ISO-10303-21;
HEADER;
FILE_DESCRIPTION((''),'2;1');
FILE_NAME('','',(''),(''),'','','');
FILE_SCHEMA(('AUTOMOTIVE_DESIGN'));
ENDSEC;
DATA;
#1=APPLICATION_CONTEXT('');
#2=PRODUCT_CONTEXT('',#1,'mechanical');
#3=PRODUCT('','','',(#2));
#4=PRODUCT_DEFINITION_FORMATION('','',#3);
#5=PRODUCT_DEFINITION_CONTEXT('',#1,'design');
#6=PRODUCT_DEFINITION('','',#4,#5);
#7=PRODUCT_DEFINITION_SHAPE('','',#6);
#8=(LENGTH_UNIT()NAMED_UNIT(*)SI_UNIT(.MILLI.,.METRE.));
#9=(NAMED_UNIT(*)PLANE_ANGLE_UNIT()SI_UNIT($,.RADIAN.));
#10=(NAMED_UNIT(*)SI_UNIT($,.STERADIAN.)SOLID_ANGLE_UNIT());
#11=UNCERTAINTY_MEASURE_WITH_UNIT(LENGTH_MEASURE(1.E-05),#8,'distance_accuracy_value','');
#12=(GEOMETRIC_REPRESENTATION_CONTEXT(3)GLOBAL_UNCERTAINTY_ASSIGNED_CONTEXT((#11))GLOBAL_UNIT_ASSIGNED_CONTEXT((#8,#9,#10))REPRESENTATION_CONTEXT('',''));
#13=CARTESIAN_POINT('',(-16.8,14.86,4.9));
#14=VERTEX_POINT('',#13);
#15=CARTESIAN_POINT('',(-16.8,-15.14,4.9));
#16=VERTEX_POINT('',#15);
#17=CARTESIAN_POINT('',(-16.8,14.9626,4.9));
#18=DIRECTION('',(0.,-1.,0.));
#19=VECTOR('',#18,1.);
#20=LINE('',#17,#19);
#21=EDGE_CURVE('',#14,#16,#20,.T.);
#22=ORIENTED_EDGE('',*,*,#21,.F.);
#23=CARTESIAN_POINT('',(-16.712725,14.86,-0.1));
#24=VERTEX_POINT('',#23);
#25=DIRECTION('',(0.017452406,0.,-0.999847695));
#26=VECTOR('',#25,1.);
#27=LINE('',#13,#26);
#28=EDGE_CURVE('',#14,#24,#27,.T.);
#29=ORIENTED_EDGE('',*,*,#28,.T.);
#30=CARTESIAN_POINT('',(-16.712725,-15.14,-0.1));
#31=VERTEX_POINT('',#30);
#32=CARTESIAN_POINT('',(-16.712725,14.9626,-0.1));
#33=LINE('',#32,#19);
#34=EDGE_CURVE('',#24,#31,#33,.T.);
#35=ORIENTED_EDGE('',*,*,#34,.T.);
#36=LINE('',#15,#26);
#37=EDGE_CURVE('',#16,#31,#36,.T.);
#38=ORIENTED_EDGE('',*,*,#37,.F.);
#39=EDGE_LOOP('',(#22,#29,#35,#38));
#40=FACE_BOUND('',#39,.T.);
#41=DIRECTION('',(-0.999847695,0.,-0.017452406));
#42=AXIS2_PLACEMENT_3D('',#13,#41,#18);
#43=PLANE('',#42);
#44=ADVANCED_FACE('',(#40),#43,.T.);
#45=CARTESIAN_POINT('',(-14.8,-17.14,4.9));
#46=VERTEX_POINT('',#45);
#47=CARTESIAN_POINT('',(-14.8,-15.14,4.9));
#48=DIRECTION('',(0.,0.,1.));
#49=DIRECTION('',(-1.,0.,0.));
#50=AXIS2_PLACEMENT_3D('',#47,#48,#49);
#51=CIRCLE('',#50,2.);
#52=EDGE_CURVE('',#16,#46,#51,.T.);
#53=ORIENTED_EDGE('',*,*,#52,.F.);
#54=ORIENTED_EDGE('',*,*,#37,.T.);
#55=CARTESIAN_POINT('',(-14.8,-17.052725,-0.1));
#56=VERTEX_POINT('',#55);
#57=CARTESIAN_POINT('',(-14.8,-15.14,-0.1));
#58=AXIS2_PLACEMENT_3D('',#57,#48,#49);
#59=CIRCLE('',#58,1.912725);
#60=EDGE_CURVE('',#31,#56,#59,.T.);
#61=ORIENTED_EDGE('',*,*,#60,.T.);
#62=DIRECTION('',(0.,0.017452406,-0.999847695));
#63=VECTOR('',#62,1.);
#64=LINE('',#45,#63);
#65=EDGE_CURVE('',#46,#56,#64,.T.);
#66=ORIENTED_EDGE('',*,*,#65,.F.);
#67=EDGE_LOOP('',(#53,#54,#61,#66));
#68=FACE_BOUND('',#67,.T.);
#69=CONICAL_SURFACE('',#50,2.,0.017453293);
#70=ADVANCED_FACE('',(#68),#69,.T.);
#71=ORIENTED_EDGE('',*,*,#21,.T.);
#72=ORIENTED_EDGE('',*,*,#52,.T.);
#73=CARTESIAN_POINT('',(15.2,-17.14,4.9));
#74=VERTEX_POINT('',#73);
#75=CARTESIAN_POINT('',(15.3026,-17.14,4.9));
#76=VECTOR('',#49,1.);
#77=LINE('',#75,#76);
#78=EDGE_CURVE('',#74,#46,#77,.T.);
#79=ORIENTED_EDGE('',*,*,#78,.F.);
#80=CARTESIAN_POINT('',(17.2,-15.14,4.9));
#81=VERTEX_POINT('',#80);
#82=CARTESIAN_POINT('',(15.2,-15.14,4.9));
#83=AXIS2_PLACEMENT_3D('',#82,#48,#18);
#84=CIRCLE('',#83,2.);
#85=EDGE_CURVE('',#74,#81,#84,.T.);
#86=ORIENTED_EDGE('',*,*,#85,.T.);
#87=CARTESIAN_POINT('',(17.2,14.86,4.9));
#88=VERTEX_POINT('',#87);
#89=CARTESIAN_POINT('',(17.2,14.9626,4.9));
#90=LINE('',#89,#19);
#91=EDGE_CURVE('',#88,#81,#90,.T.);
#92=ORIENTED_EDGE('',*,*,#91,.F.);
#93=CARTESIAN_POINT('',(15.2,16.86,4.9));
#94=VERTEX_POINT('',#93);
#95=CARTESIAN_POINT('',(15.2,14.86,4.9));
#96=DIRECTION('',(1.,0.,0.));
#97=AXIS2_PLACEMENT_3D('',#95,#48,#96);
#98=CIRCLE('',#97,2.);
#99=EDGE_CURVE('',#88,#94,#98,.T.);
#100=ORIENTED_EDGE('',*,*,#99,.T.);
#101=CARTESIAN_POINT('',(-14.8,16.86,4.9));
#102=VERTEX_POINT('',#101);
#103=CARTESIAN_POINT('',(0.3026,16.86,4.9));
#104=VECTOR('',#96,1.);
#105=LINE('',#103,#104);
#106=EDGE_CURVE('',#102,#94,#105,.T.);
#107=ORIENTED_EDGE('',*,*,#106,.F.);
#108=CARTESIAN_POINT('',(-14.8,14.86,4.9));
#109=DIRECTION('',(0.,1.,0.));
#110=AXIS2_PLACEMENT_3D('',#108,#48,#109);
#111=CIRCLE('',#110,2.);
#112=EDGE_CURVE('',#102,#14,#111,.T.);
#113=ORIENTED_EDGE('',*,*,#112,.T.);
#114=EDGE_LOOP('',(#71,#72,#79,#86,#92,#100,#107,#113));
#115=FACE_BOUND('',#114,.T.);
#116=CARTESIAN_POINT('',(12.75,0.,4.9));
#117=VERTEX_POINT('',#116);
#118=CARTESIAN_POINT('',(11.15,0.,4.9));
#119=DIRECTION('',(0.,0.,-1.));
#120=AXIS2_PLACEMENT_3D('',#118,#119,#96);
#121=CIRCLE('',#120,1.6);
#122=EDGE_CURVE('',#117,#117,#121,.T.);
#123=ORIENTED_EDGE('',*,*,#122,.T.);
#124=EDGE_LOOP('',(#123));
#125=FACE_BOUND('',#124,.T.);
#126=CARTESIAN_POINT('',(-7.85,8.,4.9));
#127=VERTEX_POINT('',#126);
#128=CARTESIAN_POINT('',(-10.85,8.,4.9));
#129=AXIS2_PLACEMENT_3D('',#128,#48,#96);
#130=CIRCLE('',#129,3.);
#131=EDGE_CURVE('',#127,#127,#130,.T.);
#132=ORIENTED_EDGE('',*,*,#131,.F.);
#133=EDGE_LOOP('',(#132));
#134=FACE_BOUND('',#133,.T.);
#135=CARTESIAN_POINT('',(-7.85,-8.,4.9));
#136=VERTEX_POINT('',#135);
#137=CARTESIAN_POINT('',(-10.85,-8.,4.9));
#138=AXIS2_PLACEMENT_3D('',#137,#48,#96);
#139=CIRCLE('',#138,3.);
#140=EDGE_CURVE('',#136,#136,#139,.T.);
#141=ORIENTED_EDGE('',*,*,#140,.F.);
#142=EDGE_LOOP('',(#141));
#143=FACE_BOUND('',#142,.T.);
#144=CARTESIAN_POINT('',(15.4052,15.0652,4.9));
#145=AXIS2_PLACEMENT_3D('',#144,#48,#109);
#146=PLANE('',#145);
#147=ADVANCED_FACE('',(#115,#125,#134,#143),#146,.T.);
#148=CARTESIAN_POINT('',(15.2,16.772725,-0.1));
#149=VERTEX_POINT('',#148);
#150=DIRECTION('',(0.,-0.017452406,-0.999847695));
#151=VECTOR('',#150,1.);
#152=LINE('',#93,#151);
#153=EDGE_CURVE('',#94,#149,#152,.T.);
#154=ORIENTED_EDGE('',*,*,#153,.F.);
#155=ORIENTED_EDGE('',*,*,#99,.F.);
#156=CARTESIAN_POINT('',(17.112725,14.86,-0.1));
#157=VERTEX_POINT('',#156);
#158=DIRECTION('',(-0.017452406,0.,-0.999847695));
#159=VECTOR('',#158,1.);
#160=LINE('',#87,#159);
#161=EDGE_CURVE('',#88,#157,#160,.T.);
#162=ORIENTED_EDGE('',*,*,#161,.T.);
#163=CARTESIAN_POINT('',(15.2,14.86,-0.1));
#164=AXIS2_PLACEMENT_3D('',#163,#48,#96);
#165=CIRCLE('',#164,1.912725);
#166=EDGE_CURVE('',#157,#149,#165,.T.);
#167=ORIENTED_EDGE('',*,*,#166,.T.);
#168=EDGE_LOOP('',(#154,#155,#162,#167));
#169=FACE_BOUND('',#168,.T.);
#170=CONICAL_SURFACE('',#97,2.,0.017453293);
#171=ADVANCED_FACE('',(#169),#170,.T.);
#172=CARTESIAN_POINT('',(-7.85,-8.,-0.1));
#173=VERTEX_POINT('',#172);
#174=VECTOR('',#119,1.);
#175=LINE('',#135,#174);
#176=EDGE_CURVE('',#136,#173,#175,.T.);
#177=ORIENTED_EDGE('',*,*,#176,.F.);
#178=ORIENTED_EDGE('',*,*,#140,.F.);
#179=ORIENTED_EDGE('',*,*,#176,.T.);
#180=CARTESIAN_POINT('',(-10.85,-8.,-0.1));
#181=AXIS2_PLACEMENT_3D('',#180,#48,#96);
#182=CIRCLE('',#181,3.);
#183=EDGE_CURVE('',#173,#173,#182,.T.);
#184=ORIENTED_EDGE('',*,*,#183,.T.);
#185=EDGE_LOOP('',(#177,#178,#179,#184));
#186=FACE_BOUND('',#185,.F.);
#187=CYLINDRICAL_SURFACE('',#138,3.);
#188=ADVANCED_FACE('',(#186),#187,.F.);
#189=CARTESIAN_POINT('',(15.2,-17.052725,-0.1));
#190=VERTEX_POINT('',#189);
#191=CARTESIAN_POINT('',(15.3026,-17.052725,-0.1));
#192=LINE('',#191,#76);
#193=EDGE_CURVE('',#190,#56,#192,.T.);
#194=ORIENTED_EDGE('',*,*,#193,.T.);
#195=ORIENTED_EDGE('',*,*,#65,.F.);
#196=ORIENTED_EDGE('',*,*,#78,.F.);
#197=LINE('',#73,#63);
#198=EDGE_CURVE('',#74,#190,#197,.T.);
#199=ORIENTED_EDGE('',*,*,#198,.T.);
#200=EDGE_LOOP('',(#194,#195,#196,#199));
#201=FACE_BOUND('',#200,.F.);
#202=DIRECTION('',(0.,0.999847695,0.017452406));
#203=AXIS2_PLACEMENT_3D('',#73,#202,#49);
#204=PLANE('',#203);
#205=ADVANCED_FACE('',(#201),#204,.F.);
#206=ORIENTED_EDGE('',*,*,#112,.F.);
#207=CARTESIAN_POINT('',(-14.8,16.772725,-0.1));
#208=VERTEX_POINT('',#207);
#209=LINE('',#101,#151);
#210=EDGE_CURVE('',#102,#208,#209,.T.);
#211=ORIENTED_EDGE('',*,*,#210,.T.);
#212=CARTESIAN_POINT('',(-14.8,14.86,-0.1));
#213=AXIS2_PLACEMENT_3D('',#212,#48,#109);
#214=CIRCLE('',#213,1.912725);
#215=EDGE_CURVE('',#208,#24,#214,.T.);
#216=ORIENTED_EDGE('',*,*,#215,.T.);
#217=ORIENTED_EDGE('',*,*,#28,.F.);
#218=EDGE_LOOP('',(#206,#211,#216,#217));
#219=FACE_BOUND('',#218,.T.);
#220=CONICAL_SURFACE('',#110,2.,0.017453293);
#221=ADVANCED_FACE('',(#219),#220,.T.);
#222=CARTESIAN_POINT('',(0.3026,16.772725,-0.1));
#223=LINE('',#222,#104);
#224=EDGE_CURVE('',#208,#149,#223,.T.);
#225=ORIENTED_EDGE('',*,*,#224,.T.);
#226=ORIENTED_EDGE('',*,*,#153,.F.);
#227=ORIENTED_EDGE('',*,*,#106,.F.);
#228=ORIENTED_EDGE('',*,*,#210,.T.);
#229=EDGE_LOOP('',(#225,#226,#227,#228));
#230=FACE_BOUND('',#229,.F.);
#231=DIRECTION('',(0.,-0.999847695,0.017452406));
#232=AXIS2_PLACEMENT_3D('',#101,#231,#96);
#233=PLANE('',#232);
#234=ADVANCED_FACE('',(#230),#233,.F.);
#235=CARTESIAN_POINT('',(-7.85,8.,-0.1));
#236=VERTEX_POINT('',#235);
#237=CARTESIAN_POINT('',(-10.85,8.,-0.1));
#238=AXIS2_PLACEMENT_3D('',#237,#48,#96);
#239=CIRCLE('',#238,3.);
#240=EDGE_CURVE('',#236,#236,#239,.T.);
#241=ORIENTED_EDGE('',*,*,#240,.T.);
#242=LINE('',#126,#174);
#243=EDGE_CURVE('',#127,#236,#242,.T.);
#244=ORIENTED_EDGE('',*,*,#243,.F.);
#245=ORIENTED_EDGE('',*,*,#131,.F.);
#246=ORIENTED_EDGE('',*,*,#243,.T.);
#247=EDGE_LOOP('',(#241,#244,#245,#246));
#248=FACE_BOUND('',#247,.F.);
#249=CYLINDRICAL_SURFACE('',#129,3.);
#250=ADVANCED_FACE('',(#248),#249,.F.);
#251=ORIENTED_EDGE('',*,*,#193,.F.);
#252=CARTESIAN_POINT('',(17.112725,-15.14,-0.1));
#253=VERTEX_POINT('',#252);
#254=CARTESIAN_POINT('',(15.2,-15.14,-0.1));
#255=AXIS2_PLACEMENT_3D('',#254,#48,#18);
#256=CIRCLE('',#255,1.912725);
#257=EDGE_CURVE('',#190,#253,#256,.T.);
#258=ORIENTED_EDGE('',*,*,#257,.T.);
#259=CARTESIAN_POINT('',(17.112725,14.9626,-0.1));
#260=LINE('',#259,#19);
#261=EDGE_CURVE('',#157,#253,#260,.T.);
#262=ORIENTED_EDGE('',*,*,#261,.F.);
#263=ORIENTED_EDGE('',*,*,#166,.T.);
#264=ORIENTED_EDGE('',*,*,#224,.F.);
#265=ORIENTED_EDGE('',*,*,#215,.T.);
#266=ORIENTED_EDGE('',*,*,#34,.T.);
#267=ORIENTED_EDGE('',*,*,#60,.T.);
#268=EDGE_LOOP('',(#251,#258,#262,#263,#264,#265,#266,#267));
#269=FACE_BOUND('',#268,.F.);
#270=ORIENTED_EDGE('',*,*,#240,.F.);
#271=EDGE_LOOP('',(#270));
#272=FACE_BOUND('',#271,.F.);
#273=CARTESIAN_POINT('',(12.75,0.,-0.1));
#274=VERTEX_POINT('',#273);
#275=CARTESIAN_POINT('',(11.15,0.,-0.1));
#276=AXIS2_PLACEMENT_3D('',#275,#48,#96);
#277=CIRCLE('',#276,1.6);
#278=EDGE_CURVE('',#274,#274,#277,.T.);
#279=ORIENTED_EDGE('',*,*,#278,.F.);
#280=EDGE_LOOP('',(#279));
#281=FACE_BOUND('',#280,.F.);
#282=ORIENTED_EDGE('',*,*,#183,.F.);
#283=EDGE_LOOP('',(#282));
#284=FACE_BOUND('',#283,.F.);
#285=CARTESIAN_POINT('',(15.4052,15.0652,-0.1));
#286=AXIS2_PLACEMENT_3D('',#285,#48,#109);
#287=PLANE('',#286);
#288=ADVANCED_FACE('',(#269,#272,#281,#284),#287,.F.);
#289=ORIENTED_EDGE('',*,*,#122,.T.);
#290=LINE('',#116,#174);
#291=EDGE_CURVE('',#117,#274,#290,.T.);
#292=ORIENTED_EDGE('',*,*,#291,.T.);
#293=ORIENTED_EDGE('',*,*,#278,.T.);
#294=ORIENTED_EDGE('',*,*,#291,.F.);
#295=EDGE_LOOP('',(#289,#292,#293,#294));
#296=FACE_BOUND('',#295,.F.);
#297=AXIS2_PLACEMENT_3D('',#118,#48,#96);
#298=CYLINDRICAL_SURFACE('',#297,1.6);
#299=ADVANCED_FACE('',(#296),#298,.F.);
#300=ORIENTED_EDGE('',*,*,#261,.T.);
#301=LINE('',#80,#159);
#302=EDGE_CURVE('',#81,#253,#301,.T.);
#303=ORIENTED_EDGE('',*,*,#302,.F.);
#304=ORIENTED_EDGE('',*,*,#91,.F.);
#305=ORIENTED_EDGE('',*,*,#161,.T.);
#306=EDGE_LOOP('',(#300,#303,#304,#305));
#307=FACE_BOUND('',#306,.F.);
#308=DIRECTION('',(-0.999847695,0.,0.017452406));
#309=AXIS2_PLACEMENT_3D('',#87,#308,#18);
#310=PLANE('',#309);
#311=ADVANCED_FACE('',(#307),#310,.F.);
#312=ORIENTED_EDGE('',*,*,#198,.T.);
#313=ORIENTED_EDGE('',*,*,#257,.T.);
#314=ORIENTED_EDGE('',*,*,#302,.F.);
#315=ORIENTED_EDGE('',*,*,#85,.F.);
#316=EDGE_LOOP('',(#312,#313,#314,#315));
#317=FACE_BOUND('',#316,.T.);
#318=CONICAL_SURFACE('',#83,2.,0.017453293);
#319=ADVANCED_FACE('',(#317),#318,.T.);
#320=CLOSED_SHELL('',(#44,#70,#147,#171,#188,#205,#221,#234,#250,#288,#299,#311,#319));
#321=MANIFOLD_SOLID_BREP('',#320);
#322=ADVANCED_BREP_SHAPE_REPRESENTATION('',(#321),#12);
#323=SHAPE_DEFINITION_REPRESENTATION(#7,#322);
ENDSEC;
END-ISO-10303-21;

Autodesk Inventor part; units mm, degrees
ref_plane "YZ Plane" through (0, 0, 0) normal (1, 0, 0) x (0, 1, 0)
ref_plane "XZ Plane" through (0, 0, 0) normal (0, 1, 0) x (-1, 0, 0)
ref_plane "XY Plane" through (0, 0, 0) normal (0, 0, 1) x (1, 0, 0)
ref_plane "Work Plane1" through (15.4052, 15.0652, 4.9) normal (0, 0, 1) x (0, 1, 0)
sketch "Sketch1" plane through (15.4052, 15.0652, 4.9) normal (0, 0, 1) x (0, 1, 0)
  circle A0 centre (5.7948, 15.4052) radius 2.5 projected
  circle A1 centre (-15.6052, -5.7948) radius 2.5 projected
  line L0 (-20.0856, 39.0762) -> (-20.0856, 40.2052) projected
  line L1 (-20.0856, 40.2052) -> (-38.2052, 40.2052) projected
  arc A2 (-38.2052, 40.2052) -> (-40.2052, 38.2052) centre (-38.2052, 38.2052) ccw projected
  line L2 (-40.2052, 20.2953) -> (-40.2052, 38.2052) projected
  line L3 (-40.2052, 20.2953) -> (-39.0783, 20.2953) projected
  arc A3 (-39.0783, 20.2953) -> (-38.6768, 20.6232) centre (-39.0783, 20.7051) ccw projected
  arc A4 (-34.5391, 20.2052) -> (-38.6768, 20.6232) centre (-36.6291, 20.2052) ccw projected
  line L4 (-34.5391, 20.2052) -> (-34.5391, 10.4067) projected
  arc A5 (-38.647, 9.8643) -> (-34.5391, 10.4067) centre (-36.6023, 10.2052) ccw projected
  line L5 (-38.647, 9.8643) -> (-38.6775, 9.9849) projected
  arc A6 (-38.6775, 9.9849) -> (-39.0762, 10.3249) centre (-39.083, 9.9131) ccw projected
  line L6 (-39.0762, 10.3249) -> (-40.2052, 10.3249) projected
  line L7 (-40.2052, -7.7948) -> (-40.2052, 10.3249) projected
  arc A7 (-40.2052, -7.7948) -> (-38.2052, -9.7948) centre (-38.2052, -7.7948) ccw projected
  line L8 (-38.2052, -9.7948) -> (-20.2052, -9.7948) projected
  line L9 (-20.2052, -9.7948) -> (-20.2052, -10.8453) projected
  arc A8 (-20.6052, -11.3352) -> (-20.2052, -10.8453) centre (-20.7052, -10.8453) ccw projected
  arc A9 (-20.6052, -11.3352) -> (-20.2052, -15.2948) centre (-20.2052, -13.2948) ccw projected
  line L10 (-20.2052, -15.2948) -> (-10.2052, -15.2948) projected
  arc A10 (-10.2052, -15.2948) -> (-9.8052, -11.3352) centre (-10.2052, -13.2948) ccw projected
  arc A11 (-10.2052, -10.8453) -> (-9.8052, -11.3352) centre (-9.7052, -10.8453) ccw projected
  line L11 (-10.2052, -10.8453) -> (-10.2052, -9.7948) projected
  line L12 (-10.2052, -9.7948) -> (7.7948, -9.7948) projected
  arc A12 (7.7948, -9.7948) -> (9.7948, -7.7948) centre (7.7948, -7.7948) ccw projected
  line L13 (9.7948, 10.2052) -> (9.7948, -7.7948) projected
  line L14 (9.7948, 10.2052) -> (10.8453, 10.2052) projected
  arc A13 (11.3352, 9.8052) -> (10.8453, 10.2052) centre (10.8453, 9.7052) ccw projected
  arc A14 (11.3352, 9.8052) -> (15.2948, 10.2052) centre (13.2948, 10.2052) ccw projected
  line L15 (15.2948, 10.2052) -> (15.2948, 20.2052) projected
  arc A15 (15.2948, 20.2052) -> (11.3352, 20.6052) centre (13.2948, 20.2052) ccw projected
  arc A16 (10.8453, 20.2052) -> (11.3352, 20.6052) centre (10.8453, 20.7052) ccw projected
  line L16 (10.8453, 20.2052) -> (9.7948, 20.2052) projected
  line L17 (9.7948, 38.2052) -> (9.7948, 20.2052) projected
  arc A17 (9.7948, 38.2052) -> (7.7948, 40.2052) centre (7.7948, 38.2052) ccw projected
  line L18 (7.7948, 40.2052) -> (-10.1151, 40.2052) projected
  line L19 (-10.1151, 40.2052) -> (-10.1151, 39.0783) projected
  arc A18 (-10.1151, 39.0783) -> (-9.7873, 38.6768) centre (-9.7054, 39.0783) ccw projected
  arc A19 (-10.2052, 34.5391) -> (-9.7873, 38.6768) centre (-10.2052, 36.6291) ccw projected
  line L20 (-10.2052, 34.5391) -> (-20.0038, 34.5391) projected
  arc A20 (-20.5462, 38.647) -> (-20.0038, 34.5391) centre (-20.2052, 36.6023) ccw projected
  line L21 (-20.5462, 38.647) -> (-20.4256, 38.6775) projected
  arc A21 (-20.4256, 38.6775) -> (-20.0856, 39.0762) centre (-20.4974, 39.083) ccw projected
  line L22 (-0.2052, 32.2052) -> (-30.2052, 32.2052) projected
  arc A22 (1.7948, 30.2052) -> (-0.2052, 32.2052) centre (-0.2052, 30.2052) ccw projected
  line L23 (1.7948, 30.2052) -> (1.7948, 0.2052) projected
  arc A23 (-0.2052, -1.7948) -> (1.7948, 0.2052) centre (-0.2052, 0.2052) ccw projected
  line L24 (-0.2052, -1.7948) -> (-30.2052, -1.7948) projected
  arc A24 (-32.2052, 0.2052) -> (-30.2052, -1.7948) centre (-30.2052, 0.2052) ccw projected
  line L25 (-32.2052, 0.2052) -> (-32.2052, 30.2052) projected
  arc A25 (-30.2052, 32.2052) -> (-32.2052, 30.2052) centre (-30.2052, 30.2052) ccw projected
  circle A26 centre (-35.2052, 35.2052) radius 2.425 projected
  circle A27 centre (-29.7052, 36.0052) radius 2.65 projected
  circle A28 centre (-36.0052, 29.7052) radius 2.65 projected
  circle A29 centre (-35.2052, -4.7948) radius 2.425 projected
  circle A30 centre (-29.7052, -5.5948) radius 2.65 projected
  circle A31 centre (-36.0052, 0.7052) radius 2.65 projected
  circle A32 centre (4.7948, 35.2052) radius 2.425 projected
  circle A33 centre (-0.7052, 36.0052) radius 2.65 projected
  circle A34 centre (5.5948, 29.7052) radius 2.65 projected
  circle A35 centre (5.5948, 0.7052) radius 2.65 projected
  circle A36 centre (-0.7052, -5.5948) radius 2.65 projected
  circle A37 centre (4.7948, -4.7948) radius 2.425 projected
  point P0 (-15.0652, 15.4052)
extrude "Extrusion1" add sketch "Sketch1" against normal blind 5 draft -1 contours A22 L23 A23 L24 A24 L25 A25 L22
sketch "Sketch2" plane through (15.4052, 15.0652, 4.9) normal (0, 0, 1) x (1, 0, 0)
  circle A0 centre (-26.2552, -7.0652) radius 3 projected
  circle A1 centre (-26.2552, -23.0652) radius 3 projected
  circle A2 centre (-4.2552, -15.0652) radius 1.6 projected
  line L0 (-50.1952, -15.0652) -> (19.3848, -15.0652)
  point P0 (-15.4052, -15.0652)
extrude "Extrusion2" cut sketch "Sketch2" against normal through all
properties part number "30_Cube_Z_Focus_Drylin_NEMA_counterplate"
